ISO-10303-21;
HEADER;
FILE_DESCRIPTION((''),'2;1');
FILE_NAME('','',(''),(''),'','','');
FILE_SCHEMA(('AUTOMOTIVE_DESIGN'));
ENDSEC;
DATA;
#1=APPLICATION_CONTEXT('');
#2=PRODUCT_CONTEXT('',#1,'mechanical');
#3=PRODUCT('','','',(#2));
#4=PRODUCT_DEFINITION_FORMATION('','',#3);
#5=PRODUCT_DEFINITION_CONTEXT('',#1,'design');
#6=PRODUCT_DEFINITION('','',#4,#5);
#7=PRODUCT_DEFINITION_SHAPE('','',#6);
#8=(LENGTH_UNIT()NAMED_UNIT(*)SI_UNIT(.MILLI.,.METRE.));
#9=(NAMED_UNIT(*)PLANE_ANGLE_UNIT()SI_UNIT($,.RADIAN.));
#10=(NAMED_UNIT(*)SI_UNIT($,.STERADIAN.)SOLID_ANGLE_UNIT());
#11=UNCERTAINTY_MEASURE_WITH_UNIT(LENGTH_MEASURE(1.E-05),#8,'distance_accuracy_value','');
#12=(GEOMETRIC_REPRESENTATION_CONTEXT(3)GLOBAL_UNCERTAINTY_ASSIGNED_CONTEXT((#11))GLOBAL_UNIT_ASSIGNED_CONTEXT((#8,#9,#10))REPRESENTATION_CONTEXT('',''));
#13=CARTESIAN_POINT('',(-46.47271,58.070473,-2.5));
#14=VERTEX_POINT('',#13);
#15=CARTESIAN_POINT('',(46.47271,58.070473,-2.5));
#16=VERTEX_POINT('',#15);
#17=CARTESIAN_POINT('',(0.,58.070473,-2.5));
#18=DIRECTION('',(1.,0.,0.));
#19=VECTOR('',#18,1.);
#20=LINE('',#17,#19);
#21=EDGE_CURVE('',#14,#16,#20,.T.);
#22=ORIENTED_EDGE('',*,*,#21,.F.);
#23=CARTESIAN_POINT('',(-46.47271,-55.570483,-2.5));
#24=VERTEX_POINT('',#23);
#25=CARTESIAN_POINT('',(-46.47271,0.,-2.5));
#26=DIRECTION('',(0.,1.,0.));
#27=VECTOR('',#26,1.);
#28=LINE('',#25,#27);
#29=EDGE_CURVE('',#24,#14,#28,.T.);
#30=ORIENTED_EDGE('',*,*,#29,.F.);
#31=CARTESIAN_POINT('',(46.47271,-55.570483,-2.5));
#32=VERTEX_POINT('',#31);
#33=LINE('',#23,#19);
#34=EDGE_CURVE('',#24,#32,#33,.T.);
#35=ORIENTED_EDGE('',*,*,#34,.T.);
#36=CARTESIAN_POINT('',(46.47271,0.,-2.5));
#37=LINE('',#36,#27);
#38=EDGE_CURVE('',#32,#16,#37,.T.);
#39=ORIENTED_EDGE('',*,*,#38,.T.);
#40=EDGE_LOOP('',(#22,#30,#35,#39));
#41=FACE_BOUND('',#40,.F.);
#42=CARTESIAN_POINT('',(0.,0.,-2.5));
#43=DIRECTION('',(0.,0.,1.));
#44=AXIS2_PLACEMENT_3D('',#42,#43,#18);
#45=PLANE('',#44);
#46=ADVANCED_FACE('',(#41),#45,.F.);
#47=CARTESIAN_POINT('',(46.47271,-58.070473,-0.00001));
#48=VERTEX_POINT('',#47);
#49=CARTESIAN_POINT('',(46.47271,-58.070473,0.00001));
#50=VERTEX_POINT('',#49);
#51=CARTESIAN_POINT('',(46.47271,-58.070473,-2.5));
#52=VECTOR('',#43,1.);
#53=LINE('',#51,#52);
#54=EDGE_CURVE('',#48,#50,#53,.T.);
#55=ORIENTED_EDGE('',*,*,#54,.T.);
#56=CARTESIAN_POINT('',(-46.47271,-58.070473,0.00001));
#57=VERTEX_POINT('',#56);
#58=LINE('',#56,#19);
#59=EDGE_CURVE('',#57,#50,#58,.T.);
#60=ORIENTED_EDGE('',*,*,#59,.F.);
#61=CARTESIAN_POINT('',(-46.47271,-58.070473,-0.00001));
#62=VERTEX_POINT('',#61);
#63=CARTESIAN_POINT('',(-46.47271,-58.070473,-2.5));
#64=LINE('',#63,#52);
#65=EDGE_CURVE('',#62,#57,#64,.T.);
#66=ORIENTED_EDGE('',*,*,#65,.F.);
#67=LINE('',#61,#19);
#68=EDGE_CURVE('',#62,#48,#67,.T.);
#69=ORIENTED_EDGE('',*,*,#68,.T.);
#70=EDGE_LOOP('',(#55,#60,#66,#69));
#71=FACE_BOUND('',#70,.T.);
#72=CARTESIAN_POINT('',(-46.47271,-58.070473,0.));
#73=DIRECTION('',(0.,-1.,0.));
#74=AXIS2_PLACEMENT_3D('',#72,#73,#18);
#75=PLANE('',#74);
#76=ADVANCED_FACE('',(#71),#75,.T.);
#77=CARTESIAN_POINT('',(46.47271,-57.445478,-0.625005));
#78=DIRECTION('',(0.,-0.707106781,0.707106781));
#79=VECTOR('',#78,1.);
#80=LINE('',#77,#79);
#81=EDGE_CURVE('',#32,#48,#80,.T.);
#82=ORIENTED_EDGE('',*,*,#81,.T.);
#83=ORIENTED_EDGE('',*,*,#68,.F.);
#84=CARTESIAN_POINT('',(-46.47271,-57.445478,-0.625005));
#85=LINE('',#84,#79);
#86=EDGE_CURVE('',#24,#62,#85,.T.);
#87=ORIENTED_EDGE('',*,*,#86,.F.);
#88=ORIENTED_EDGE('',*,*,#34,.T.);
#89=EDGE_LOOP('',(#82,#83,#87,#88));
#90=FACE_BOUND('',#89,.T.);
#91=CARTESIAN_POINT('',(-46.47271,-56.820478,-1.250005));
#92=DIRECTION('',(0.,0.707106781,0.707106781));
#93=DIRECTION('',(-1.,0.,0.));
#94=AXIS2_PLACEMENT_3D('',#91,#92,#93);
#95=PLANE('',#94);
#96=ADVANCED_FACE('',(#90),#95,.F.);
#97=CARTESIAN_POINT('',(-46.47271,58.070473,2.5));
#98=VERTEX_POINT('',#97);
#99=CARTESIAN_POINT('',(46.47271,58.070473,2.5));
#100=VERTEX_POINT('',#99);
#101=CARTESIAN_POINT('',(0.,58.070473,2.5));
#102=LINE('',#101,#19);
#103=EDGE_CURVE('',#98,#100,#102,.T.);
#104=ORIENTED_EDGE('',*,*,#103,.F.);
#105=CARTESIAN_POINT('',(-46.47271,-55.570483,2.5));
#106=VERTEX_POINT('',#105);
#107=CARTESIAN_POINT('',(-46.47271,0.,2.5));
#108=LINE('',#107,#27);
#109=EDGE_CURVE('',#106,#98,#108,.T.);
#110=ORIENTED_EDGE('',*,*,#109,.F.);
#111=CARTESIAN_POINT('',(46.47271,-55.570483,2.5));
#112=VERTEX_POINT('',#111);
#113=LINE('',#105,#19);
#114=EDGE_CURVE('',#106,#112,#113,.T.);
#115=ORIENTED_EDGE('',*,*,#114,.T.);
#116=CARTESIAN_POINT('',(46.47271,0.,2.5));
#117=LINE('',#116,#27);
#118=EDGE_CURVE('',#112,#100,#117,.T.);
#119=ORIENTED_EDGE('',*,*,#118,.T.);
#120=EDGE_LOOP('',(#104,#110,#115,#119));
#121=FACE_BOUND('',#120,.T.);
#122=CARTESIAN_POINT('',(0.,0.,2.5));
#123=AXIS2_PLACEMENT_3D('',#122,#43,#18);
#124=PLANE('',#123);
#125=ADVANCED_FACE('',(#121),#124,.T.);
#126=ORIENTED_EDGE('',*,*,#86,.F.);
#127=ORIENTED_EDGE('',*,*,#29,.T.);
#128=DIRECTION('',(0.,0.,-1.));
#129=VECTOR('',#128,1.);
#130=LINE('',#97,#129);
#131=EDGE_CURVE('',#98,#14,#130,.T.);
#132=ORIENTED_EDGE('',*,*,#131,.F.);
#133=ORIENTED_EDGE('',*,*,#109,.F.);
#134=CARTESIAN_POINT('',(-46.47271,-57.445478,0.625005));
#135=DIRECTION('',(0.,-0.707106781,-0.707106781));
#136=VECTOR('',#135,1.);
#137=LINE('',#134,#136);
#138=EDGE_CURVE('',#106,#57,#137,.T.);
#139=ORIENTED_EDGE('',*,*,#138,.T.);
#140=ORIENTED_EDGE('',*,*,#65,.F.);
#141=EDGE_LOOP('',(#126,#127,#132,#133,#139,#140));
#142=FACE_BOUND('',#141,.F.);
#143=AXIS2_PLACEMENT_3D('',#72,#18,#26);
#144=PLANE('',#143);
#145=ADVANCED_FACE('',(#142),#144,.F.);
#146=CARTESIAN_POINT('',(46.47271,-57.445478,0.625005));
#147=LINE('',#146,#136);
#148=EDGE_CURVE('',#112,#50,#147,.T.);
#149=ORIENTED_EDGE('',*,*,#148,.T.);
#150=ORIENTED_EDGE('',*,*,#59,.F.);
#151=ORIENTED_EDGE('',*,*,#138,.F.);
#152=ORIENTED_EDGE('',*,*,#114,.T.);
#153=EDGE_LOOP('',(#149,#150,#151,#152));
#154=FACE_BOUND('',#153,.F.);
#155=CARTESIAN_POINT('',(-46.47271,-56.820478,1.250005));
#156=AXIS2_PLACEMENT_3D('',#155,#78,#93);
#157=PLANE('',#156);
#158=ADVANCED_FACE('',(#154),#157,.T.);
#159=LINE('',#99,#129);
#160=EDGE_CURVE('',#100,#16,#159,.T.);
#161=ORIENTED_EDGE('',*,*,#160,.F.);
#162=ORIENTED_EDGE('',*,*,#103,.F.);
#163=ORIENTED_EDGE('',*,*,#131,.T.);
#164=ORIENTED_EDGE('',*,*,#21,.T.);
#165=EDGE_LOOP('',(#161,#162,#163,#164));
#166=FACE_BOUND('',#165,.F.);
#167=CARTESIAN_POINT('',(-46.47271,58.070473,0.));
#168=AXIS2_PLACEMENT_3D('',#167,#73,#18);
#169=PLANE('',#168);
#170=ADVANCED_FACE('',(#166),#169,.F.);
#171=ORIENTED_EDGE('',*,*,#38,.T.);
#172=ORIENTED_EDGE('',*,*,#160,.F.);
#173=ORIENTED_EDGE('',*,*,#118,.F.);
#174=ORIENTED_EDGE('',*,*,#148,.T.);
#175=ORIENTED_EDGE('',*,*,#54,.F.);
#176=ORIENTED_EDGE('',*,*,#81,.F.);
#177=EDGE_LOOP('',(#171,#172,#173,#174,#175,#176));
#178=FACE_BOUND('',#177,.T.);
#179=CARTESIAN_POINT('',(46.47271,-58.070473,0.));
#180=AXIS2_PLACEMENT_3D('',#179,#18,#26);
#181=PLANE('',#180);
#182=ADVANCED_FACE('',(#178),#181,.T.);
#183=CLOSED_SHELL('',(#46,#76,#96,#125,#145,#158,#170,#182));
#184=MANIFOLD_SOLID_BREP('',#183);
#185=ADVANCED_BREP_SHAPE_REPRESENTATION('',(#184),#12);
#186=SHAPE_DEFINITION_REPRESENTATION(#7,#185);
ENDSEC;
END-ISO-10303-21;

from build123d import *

# Parameters (mm, degrees)
F1_W          = 92.9454192519
F1_H          = 116.1409467459
F2_DEPTH      = 2.5
F2_DEPTH_BACK = 2.5
F3_SIZE       = 2.49999
F0_W          = 71.3404193521
F0_H          = 85.4026153684
F4_DEPTH      = 1
F4_DEPTH_BACK = 1


# Not quite as in the source:
# - a fillet or chamfer is up to 0.001 mm smaller than in the source, because OpenCascade refuses the exact size


with BuildPart() as f2:
    # F1 (on face) → F2 (new body, two sides)
    with BuildSketch(Plane.XY) as f2_sk:
        Rectangle(F1_W, F1_H)
    extrude(amount=F2_DEPTH)
    extrude(f2_sk.sketch, amount=-F2_DEPTH_BACK)

    # F3 (size 2.5 in the source; OpenCascade refuses exactly that, so slightly less here)
    f3_edges = [f2.edges().sort_by_distance(p)[0] for p in [
        (0, -58.070473, 2.5),
        (0, -58.070473, -2.5),
    ]]
    chamfer(f3_edges, length=F3_SIZE)

    # F0 (on Top) → F4 (join, two sides)
    with BuildSketch(Plane.XY) as f4_sk:
        Rectangle(F0_W, F0_H)
    extrude(amount=F4_DEPTH)
    extrude(f4_sk.sketch, amount=-F4_DEPTH_BACK)


solid = f2.part
